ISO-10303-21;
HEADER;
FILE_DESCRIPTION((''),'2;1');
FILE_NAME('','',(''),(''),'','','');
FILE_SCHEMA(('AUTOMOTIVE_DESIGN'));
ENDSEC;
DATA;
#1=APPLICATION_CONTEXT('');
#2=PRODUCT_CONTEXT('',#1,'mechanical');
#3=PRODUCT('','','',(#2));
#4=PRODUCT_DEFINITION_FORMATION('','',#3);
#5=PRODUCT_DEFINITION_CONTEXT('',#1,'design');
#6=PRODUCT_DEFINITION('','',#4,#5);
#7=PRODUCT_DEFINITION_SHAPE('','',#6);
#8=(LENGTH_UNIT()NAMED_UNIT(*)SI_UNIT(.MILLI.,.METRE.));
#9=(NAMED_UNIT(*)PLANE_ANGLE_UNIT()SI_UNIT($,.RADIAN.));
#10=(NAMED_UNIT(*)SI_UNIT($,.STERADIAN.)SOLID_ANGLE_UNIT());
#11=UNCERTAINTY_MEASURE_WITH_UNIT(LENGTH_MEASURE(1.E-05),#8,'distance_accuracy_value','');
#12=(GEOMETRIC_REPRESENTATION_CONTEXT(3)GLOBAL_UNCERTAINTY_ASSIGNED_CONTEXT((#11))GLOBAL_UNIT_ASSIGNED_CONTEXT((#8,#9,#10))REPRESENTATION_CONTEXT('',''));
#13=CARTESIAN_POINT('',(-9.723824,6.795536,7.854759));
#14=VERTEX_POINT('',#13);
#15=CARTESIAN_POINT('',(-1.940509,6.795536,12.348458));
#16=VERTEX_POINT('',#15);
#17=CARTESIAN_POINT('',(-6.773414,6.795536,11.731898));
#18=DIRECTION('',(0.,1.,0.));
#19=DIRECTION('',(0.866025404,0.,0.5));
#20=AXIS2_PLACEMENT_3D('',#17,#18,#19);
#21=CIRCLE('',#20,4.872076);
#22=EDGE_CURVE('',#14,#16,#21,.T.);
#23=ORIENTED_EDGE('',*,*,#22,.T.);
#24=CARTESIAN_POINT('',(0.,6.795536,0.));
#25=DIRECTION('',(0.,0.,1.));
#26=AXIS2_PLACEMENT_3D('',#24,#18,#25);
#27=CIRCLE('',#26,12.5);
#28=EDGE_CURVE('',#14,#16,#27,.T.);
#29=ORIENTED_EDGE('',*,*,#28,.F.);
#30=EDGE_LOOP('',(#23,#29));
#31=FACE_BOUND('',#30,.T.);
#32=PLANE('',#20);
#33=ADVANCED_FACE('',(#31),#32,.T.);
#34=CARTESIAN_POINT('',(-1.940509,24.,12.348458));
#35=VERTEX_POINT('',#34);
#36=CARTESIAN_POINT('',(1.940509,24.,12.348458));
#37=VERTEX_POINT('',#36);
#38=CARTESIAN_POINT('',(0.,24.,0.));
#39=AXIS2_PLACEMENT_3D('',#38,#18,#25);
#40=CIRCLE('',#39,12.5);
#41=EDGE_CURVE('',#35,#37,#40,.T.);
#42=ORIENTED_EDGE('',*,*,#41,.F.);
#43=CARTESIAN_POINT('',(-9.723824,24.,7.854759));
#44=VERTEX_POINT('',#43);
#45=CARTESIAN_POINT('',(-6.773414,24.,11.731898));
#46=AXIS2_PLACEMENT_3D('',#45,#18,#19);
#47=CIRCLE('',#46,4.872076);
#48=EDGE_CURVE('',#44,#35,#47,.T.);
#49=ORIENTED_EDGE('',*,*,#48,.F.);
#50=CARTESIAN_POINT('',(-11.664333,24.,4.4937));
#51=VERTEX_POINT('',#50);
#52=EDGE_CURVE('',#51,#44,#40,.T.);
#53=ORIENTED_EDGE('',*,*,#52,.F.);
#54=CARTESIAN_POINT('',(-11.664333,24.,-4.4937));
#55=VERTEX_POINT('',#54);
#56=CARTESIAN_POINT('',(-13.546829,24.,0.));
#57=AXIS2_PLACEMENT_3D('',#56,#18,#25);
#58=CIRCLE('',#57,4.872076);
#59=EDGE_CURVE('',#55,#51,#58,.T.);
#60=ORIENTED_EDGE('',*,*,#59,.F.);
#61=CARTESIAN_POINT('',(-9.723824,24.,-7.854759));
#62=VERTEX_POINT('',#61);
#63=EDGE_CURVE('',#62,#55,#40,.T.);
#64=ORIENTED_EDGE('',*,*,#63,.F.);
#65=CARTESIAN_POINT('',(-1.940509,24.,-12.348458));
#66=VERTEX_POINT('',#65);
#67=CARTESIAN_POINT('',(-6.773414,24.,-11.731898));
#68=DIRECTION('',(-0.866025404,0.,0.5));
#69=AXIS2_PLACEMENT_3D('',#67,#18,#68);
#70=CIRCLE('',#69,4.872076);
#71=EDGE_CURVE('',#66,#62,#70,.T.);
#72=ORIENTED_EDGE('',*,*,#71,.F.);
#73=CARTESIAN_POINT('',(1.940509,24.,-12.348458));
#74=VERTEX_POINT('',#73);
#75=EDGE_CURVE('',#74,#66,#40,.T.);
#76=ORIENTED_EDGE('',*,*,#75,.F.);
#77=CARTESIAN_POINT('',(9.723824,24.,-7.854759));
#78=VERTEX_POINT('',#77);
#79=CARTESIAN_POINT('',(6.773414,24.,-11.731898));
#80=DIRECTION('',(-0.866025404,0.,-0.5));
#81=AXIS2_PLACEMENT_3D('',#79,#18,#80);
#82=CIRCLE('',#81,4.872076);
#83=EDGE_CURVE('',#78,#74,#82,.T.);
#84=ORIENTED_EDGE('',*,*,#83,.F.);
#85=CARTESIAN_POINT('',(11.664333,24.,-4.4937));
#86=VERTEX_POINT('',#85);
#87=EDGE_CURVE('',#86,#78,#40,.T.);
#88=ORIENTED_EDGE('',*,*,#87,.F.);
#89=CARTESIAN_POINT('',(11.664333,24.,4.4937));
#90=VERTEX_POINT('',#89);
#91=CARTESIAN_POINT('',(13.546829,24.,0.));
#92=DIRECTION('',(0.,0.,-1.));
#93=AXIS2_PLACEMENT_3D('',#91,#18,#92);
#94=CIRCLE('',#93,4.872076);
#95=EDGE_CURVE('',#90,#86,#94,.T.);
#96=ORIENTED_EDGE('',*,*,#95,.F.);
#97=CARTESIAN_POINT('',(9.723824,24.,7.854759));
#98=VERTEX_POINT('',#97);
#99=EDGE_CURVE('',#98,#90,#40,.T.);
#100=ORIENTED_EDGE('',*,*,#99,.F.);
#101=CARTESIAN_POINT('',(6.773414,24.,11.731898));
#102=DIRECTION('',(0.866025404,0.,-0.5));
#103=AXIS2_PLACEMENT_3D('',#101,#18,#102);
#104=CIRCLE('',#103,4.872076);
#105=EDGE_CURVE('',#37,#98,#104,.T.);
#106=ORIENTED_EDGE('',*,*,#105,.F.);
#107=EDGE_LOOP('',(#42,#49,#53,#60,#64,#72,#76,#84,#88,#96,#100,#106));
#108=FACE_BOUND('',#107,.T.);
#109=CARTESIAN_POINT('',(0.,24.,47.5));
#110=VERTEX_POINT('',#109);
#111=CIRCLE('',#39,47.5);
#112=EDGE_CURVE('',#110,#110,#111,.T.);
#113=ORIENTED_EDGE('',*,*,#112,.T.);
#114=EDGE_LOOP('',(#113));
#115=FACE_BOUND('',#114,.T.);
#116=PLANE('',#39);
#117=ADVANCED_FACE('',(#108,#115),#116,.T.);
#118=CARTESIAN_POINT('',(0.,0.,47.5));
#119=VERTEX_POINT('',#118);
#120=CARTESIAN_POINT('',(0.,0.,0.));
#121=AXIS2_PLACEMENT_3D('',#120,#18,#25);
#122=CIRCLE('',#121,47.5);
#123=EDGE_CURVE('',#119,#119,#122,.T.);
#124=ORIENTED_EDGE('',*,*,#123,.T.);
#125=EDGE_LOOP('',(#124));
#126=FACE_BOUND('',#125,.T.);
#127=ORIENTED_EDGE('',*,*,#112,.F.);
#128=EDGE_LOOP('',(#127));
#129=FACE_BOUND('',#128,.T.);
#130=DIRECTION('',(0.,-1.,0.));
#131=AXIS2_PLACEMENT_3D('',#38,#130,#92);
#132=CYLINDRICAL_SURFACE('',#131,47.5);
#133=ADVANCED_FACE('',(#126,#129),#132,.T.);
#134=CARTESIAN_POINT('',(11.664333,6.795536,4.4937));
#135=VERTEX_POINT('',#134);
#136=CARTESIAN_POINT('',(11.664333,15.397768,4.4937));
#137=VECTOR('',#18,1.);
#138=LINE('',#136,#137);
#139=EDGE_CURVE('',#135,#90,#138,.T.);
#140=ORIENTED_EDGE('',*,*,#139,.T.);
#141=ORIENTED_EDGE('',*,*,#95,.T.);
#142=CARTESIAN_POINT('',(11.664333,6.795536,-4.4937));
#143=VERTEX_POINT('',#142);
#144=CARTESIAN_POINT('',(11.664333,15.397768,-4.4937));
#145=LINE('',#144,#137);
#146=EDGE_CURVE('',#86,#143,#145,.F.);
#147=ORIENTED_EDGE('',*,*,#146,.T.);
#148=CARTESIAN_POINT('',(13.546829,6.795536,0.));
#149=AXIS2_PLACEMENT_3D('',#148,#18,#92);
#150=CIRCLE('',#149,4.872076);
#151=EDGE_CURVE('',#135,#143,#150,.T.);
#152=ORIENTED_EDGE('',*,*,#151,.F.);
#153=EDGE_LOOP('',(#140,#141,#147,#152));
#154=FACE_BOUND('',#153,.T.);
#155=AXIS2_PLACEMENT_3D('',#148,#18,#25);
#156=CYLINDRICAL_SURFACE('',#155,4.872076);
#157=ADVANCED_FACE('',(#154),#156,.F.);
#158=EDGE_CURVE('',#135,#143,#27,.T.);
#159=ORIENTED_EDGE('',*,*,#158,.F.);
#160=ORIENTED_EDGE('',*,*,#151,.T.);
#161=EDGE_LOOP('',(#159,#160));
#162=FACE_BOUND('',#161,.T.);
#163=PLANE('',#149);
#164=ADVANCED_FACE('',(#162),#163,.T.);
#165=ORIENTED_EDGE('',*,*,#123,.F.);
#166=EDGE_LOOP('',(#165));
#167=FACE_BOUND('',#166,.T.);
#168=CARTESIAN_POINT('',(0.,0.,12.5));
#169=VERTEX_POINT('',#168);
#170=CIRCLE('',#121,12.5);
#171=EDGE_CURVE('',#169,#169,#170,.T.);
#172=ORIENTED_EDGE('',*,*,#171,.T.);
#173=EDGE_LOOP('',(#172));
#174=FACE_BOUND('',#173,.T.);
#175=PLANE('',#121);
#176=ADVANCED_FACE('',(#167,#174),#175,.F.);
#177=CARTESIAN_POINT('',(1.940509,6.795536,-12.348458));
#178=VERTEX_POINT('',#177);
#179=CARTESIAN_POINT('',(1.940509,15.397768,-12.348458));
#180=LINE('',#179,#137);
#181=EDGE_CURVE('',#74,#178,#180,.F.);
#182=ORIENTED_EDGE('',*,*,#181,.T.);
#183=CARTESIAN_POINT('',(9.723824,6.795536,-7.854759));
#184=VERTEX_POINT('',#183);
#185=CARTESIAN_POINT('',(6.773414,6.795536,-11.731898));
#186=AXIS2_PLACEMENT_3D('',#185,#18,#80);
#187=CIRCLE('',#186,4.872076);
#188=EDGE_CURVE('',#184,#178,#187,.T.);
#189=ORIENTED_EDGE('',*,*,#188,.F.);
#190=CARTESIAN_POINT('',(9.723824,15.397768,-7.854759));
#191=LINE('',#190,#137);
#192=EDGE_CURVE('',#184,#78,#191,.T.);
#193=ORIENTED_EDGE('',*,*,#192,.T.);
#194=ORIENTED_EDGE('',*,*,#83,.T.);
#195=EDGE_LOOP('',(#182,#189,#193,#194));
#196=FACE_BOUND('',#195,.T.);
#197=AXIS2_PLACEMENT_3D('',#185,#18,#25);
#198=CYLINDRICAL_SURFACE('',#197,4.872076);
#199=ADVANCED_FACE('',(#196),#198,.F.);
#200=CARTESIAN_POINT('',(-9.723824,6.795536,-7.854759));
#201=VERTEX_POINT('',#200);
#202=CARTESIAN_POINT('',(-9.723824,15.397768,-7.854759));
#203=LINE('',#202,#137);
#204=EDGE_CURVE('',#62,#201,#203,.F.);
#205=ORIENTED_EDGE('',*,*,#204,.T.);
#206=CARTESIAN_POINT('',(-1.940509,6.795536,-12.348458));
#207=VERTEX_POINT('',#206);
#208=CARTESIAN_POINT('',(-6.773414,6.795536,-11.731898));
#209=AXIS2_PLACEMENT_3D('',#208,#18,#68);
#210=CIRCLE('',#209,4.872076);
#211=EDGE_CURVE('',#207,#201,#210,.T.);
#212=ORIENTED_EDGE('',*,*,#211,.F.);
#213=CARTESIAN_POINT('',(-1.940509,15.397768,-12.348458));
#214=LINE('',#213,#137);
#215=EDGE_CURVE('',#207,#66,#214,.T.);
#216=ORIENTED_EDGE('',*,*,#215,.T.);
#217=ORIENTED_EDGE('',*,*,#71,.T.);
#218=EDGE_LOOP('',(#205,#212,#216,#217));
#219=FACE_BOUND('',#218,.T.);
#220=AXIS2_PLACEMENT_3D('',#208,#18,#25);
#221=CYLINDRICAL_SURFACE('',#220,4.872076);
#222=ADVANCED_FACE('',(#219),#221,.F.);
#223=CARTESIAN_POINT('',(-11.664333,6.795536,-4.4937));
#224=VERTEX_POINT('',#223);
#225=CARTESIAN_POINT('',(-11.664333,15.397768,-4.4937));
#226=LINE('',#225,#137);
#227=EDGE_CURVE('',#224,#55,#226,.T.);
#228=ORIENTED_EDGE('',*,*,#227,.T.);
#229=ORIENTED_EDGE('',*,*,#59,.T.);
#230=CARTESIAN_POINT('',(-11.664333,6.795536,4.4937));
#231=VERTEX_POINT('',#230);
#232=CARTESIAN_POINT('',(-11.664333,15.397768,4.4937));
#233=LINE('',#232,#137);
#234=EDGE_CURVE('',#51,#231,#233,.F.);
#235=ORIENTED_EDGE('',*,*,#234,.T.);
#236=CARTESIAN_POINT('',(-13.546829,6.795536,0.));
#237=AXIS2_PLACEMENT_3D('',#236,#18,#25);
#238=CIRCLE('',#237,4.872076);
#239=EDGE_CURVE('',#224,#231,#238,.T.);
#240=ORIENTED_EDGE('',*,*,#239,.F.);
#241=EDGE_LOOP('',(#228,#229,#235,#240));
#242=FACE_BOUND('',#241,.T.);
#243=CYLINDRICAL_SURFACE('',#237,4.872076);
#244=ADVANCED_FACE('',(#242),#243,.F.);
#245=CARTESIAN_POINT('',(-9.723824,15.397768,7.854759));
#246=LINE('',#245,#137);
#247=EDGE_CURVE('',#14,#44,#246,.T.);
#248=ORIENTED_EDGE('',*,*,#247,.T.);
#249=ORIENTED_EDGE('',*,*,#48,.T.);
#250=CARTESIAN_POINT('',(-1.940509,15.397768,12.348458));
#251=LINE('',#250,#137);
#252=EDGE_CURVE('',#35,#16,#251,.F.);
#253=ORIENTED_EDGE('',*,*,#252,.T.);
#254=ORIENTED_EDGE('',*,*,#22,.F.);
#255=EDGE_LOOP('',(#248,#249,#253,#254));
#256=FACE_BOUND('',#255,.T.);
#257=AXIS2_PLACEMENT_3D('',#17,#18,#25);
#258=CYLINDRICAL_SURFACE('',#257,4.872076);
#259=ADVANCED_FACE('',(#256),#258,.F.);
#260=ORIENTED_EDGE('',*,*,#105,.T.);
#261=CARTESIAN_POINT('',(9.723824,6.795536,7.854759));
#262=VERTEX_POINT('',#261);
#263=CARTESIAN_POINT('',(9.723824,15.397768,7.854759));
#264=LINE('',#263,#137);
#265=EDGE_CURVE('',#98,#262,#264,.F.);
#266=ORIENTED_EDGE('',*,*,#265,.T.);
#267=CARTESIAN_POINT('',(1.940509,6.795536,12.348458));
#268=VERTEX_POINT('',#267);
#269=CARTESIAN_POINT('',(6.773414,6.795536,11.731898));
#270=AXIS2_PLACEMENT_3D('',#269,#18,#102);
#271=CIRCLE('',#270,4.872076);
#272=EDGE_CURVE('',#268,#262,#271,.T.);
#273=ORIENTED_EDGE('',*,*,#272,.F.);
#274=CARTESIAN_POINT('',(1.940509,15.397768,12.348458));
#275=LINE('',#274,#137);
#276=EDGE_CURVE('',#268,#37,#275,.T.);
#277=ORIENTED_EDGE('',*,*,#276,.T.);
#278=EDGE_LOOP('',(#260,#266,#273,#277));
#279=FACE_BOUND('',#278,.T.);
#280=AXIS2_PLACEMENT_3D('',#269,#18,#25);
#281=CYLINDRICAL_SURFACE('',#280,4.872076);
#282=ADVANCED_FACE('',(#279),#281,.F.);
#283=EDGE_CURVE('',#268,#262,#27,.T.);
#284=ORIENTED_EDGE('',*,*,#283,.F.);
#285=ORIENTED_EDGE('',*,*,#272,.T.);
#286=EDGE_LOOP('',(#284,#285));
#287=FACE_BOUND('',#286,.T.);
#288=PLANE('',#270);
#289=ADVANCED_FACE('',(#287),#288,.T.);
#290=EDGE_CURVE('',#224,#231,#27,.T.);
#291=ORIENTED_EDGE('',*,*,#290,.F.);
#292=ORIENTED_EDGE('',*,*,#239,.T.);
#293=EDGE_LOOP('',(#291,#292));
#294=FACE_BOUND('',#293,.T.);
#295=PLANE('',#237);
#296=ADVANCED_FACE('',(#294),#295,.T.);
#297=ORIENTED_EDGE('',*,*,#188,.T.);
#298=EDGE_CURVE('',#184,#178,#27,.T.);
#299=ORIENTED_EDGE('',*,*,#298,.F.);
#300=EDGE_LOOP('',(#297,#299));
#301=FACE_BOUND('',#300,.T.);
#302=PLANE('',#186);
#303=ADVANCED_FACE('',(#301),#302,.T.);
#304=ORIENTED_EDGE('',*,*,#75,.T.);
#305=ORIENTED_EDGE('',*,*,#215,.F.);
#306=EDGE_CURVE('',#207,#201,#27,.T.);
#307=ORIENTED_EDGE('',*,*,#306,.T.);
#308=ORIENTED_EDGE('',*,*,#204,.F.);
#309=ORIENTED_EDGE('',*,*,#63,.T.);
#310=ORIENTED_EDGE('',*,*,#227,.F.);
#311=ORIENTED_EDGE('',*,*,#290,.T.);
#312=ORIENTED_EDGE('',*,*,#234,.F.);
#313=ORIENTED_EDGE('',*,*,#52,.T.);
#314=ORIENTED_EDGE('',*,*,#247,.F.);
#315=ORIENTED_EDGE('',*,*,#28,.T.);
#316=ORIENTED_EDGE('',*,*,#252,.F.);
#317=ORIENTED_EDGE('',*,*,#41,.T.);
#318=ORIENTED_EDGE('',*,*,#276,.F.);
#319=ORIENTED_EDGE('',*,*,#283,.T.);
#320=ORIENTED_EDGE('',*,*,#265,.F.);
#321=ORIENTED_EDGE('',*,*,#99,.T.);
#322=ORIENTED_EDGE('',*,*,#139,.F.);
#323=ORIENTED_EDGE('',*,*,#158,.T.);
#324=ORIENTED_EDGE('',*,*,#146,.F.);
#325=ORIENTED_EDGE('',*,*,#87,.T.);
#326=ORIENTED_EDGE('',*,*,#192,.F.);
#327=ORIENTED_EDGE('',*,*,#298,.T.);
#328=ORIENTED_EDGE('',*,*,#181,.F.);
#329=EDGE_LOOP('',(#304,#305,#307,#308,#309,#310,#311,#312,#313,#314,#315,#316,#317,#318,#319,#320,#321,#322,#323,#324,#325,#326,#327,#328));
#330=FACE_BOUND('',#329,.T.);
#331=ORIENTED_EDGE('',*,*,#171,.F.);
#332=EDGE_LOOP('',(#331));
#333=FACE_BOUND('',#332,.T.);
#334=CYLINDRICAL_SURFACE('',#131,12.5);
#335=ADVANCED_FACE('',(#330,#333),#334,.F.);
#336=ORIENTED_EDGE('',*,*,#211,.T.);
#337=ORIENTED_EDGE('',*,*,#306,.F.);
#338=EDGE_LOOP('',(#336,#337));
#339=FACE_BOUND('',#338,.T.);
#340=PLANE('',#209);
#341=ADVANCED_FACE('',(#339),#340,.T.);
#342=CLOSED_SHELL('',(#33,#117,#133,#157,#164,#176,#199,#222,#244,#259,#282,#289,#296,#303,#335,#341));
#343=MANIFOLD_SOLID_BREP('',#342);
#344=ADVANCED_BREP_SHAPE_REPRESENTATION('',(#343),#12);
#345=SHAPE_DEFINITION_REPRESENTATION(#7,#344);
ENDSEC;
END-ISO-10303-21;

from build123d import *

# Parameters (mm, degrees)
SKETCH1_R           = 47.5
BOSS_EXTRUDE1_DEPTH = 24
SKETCH2_R           = 12.5
CUT_EXTRUDE1_DEPTH  = 72.33372274
SKETCH3_R           = 4.87207621
CUT_EXTRUDE2_DEPTH  = 17.204463713
CIRPATTERN1_COUNT   = 6


with BuildPart() as part:
    # Sketch1 → Boss-Extrude1 (new body)
    with BuildSketch(Plane(origin=(0, 0, 0), x_dir=(1, 0, 0), z_dir=(0, 1, 0))):
        Circle(SKETCH1_R)
    extrude(amount=BOSS_EXTRUDE1_DEPTH)

    # Sketch2 → Cut-Extrude1 (cut, through all)
    with BuildSketch(Plane(origin=(0, 0, 0), x_dir=(1, 0, 0), z_dir=(0, 1, 0))):
        Circle(SKETCH2_R)
    extrude(amount=CUT_EXTRUDE1_DEPTH, mode=Mode.SUBTRACT)

    # Sketch3 → Cut-Extrude2 (cut)
    with BuildSketch(Plane(origin=(0, 24, 0), x_dir=(1, 0, 0), z_dir=(0, 1, 0))):
        with Locations((-13.546828855, 0)):
            Circle(SKETCH3_R)
    cut_extrude2 = extrude(amount=-CUT_EXTRUDE2_DEPTH, mode=Mode.SUBTRACT)

    # CirPattern1: Cut-Extrude2 ×6 about axis
    cirpattern1_axis = Axis((0, 0, 0), (0, 1, 0))
    for i in range(1, CIRPATTERN1_COUNT):
        add(cut_extrude2.rotate(cirpattern1_axis, i * 360 / CIRPATTERN1_COUNT), mode=Mode.SUBTRACT)


solid = part.part
